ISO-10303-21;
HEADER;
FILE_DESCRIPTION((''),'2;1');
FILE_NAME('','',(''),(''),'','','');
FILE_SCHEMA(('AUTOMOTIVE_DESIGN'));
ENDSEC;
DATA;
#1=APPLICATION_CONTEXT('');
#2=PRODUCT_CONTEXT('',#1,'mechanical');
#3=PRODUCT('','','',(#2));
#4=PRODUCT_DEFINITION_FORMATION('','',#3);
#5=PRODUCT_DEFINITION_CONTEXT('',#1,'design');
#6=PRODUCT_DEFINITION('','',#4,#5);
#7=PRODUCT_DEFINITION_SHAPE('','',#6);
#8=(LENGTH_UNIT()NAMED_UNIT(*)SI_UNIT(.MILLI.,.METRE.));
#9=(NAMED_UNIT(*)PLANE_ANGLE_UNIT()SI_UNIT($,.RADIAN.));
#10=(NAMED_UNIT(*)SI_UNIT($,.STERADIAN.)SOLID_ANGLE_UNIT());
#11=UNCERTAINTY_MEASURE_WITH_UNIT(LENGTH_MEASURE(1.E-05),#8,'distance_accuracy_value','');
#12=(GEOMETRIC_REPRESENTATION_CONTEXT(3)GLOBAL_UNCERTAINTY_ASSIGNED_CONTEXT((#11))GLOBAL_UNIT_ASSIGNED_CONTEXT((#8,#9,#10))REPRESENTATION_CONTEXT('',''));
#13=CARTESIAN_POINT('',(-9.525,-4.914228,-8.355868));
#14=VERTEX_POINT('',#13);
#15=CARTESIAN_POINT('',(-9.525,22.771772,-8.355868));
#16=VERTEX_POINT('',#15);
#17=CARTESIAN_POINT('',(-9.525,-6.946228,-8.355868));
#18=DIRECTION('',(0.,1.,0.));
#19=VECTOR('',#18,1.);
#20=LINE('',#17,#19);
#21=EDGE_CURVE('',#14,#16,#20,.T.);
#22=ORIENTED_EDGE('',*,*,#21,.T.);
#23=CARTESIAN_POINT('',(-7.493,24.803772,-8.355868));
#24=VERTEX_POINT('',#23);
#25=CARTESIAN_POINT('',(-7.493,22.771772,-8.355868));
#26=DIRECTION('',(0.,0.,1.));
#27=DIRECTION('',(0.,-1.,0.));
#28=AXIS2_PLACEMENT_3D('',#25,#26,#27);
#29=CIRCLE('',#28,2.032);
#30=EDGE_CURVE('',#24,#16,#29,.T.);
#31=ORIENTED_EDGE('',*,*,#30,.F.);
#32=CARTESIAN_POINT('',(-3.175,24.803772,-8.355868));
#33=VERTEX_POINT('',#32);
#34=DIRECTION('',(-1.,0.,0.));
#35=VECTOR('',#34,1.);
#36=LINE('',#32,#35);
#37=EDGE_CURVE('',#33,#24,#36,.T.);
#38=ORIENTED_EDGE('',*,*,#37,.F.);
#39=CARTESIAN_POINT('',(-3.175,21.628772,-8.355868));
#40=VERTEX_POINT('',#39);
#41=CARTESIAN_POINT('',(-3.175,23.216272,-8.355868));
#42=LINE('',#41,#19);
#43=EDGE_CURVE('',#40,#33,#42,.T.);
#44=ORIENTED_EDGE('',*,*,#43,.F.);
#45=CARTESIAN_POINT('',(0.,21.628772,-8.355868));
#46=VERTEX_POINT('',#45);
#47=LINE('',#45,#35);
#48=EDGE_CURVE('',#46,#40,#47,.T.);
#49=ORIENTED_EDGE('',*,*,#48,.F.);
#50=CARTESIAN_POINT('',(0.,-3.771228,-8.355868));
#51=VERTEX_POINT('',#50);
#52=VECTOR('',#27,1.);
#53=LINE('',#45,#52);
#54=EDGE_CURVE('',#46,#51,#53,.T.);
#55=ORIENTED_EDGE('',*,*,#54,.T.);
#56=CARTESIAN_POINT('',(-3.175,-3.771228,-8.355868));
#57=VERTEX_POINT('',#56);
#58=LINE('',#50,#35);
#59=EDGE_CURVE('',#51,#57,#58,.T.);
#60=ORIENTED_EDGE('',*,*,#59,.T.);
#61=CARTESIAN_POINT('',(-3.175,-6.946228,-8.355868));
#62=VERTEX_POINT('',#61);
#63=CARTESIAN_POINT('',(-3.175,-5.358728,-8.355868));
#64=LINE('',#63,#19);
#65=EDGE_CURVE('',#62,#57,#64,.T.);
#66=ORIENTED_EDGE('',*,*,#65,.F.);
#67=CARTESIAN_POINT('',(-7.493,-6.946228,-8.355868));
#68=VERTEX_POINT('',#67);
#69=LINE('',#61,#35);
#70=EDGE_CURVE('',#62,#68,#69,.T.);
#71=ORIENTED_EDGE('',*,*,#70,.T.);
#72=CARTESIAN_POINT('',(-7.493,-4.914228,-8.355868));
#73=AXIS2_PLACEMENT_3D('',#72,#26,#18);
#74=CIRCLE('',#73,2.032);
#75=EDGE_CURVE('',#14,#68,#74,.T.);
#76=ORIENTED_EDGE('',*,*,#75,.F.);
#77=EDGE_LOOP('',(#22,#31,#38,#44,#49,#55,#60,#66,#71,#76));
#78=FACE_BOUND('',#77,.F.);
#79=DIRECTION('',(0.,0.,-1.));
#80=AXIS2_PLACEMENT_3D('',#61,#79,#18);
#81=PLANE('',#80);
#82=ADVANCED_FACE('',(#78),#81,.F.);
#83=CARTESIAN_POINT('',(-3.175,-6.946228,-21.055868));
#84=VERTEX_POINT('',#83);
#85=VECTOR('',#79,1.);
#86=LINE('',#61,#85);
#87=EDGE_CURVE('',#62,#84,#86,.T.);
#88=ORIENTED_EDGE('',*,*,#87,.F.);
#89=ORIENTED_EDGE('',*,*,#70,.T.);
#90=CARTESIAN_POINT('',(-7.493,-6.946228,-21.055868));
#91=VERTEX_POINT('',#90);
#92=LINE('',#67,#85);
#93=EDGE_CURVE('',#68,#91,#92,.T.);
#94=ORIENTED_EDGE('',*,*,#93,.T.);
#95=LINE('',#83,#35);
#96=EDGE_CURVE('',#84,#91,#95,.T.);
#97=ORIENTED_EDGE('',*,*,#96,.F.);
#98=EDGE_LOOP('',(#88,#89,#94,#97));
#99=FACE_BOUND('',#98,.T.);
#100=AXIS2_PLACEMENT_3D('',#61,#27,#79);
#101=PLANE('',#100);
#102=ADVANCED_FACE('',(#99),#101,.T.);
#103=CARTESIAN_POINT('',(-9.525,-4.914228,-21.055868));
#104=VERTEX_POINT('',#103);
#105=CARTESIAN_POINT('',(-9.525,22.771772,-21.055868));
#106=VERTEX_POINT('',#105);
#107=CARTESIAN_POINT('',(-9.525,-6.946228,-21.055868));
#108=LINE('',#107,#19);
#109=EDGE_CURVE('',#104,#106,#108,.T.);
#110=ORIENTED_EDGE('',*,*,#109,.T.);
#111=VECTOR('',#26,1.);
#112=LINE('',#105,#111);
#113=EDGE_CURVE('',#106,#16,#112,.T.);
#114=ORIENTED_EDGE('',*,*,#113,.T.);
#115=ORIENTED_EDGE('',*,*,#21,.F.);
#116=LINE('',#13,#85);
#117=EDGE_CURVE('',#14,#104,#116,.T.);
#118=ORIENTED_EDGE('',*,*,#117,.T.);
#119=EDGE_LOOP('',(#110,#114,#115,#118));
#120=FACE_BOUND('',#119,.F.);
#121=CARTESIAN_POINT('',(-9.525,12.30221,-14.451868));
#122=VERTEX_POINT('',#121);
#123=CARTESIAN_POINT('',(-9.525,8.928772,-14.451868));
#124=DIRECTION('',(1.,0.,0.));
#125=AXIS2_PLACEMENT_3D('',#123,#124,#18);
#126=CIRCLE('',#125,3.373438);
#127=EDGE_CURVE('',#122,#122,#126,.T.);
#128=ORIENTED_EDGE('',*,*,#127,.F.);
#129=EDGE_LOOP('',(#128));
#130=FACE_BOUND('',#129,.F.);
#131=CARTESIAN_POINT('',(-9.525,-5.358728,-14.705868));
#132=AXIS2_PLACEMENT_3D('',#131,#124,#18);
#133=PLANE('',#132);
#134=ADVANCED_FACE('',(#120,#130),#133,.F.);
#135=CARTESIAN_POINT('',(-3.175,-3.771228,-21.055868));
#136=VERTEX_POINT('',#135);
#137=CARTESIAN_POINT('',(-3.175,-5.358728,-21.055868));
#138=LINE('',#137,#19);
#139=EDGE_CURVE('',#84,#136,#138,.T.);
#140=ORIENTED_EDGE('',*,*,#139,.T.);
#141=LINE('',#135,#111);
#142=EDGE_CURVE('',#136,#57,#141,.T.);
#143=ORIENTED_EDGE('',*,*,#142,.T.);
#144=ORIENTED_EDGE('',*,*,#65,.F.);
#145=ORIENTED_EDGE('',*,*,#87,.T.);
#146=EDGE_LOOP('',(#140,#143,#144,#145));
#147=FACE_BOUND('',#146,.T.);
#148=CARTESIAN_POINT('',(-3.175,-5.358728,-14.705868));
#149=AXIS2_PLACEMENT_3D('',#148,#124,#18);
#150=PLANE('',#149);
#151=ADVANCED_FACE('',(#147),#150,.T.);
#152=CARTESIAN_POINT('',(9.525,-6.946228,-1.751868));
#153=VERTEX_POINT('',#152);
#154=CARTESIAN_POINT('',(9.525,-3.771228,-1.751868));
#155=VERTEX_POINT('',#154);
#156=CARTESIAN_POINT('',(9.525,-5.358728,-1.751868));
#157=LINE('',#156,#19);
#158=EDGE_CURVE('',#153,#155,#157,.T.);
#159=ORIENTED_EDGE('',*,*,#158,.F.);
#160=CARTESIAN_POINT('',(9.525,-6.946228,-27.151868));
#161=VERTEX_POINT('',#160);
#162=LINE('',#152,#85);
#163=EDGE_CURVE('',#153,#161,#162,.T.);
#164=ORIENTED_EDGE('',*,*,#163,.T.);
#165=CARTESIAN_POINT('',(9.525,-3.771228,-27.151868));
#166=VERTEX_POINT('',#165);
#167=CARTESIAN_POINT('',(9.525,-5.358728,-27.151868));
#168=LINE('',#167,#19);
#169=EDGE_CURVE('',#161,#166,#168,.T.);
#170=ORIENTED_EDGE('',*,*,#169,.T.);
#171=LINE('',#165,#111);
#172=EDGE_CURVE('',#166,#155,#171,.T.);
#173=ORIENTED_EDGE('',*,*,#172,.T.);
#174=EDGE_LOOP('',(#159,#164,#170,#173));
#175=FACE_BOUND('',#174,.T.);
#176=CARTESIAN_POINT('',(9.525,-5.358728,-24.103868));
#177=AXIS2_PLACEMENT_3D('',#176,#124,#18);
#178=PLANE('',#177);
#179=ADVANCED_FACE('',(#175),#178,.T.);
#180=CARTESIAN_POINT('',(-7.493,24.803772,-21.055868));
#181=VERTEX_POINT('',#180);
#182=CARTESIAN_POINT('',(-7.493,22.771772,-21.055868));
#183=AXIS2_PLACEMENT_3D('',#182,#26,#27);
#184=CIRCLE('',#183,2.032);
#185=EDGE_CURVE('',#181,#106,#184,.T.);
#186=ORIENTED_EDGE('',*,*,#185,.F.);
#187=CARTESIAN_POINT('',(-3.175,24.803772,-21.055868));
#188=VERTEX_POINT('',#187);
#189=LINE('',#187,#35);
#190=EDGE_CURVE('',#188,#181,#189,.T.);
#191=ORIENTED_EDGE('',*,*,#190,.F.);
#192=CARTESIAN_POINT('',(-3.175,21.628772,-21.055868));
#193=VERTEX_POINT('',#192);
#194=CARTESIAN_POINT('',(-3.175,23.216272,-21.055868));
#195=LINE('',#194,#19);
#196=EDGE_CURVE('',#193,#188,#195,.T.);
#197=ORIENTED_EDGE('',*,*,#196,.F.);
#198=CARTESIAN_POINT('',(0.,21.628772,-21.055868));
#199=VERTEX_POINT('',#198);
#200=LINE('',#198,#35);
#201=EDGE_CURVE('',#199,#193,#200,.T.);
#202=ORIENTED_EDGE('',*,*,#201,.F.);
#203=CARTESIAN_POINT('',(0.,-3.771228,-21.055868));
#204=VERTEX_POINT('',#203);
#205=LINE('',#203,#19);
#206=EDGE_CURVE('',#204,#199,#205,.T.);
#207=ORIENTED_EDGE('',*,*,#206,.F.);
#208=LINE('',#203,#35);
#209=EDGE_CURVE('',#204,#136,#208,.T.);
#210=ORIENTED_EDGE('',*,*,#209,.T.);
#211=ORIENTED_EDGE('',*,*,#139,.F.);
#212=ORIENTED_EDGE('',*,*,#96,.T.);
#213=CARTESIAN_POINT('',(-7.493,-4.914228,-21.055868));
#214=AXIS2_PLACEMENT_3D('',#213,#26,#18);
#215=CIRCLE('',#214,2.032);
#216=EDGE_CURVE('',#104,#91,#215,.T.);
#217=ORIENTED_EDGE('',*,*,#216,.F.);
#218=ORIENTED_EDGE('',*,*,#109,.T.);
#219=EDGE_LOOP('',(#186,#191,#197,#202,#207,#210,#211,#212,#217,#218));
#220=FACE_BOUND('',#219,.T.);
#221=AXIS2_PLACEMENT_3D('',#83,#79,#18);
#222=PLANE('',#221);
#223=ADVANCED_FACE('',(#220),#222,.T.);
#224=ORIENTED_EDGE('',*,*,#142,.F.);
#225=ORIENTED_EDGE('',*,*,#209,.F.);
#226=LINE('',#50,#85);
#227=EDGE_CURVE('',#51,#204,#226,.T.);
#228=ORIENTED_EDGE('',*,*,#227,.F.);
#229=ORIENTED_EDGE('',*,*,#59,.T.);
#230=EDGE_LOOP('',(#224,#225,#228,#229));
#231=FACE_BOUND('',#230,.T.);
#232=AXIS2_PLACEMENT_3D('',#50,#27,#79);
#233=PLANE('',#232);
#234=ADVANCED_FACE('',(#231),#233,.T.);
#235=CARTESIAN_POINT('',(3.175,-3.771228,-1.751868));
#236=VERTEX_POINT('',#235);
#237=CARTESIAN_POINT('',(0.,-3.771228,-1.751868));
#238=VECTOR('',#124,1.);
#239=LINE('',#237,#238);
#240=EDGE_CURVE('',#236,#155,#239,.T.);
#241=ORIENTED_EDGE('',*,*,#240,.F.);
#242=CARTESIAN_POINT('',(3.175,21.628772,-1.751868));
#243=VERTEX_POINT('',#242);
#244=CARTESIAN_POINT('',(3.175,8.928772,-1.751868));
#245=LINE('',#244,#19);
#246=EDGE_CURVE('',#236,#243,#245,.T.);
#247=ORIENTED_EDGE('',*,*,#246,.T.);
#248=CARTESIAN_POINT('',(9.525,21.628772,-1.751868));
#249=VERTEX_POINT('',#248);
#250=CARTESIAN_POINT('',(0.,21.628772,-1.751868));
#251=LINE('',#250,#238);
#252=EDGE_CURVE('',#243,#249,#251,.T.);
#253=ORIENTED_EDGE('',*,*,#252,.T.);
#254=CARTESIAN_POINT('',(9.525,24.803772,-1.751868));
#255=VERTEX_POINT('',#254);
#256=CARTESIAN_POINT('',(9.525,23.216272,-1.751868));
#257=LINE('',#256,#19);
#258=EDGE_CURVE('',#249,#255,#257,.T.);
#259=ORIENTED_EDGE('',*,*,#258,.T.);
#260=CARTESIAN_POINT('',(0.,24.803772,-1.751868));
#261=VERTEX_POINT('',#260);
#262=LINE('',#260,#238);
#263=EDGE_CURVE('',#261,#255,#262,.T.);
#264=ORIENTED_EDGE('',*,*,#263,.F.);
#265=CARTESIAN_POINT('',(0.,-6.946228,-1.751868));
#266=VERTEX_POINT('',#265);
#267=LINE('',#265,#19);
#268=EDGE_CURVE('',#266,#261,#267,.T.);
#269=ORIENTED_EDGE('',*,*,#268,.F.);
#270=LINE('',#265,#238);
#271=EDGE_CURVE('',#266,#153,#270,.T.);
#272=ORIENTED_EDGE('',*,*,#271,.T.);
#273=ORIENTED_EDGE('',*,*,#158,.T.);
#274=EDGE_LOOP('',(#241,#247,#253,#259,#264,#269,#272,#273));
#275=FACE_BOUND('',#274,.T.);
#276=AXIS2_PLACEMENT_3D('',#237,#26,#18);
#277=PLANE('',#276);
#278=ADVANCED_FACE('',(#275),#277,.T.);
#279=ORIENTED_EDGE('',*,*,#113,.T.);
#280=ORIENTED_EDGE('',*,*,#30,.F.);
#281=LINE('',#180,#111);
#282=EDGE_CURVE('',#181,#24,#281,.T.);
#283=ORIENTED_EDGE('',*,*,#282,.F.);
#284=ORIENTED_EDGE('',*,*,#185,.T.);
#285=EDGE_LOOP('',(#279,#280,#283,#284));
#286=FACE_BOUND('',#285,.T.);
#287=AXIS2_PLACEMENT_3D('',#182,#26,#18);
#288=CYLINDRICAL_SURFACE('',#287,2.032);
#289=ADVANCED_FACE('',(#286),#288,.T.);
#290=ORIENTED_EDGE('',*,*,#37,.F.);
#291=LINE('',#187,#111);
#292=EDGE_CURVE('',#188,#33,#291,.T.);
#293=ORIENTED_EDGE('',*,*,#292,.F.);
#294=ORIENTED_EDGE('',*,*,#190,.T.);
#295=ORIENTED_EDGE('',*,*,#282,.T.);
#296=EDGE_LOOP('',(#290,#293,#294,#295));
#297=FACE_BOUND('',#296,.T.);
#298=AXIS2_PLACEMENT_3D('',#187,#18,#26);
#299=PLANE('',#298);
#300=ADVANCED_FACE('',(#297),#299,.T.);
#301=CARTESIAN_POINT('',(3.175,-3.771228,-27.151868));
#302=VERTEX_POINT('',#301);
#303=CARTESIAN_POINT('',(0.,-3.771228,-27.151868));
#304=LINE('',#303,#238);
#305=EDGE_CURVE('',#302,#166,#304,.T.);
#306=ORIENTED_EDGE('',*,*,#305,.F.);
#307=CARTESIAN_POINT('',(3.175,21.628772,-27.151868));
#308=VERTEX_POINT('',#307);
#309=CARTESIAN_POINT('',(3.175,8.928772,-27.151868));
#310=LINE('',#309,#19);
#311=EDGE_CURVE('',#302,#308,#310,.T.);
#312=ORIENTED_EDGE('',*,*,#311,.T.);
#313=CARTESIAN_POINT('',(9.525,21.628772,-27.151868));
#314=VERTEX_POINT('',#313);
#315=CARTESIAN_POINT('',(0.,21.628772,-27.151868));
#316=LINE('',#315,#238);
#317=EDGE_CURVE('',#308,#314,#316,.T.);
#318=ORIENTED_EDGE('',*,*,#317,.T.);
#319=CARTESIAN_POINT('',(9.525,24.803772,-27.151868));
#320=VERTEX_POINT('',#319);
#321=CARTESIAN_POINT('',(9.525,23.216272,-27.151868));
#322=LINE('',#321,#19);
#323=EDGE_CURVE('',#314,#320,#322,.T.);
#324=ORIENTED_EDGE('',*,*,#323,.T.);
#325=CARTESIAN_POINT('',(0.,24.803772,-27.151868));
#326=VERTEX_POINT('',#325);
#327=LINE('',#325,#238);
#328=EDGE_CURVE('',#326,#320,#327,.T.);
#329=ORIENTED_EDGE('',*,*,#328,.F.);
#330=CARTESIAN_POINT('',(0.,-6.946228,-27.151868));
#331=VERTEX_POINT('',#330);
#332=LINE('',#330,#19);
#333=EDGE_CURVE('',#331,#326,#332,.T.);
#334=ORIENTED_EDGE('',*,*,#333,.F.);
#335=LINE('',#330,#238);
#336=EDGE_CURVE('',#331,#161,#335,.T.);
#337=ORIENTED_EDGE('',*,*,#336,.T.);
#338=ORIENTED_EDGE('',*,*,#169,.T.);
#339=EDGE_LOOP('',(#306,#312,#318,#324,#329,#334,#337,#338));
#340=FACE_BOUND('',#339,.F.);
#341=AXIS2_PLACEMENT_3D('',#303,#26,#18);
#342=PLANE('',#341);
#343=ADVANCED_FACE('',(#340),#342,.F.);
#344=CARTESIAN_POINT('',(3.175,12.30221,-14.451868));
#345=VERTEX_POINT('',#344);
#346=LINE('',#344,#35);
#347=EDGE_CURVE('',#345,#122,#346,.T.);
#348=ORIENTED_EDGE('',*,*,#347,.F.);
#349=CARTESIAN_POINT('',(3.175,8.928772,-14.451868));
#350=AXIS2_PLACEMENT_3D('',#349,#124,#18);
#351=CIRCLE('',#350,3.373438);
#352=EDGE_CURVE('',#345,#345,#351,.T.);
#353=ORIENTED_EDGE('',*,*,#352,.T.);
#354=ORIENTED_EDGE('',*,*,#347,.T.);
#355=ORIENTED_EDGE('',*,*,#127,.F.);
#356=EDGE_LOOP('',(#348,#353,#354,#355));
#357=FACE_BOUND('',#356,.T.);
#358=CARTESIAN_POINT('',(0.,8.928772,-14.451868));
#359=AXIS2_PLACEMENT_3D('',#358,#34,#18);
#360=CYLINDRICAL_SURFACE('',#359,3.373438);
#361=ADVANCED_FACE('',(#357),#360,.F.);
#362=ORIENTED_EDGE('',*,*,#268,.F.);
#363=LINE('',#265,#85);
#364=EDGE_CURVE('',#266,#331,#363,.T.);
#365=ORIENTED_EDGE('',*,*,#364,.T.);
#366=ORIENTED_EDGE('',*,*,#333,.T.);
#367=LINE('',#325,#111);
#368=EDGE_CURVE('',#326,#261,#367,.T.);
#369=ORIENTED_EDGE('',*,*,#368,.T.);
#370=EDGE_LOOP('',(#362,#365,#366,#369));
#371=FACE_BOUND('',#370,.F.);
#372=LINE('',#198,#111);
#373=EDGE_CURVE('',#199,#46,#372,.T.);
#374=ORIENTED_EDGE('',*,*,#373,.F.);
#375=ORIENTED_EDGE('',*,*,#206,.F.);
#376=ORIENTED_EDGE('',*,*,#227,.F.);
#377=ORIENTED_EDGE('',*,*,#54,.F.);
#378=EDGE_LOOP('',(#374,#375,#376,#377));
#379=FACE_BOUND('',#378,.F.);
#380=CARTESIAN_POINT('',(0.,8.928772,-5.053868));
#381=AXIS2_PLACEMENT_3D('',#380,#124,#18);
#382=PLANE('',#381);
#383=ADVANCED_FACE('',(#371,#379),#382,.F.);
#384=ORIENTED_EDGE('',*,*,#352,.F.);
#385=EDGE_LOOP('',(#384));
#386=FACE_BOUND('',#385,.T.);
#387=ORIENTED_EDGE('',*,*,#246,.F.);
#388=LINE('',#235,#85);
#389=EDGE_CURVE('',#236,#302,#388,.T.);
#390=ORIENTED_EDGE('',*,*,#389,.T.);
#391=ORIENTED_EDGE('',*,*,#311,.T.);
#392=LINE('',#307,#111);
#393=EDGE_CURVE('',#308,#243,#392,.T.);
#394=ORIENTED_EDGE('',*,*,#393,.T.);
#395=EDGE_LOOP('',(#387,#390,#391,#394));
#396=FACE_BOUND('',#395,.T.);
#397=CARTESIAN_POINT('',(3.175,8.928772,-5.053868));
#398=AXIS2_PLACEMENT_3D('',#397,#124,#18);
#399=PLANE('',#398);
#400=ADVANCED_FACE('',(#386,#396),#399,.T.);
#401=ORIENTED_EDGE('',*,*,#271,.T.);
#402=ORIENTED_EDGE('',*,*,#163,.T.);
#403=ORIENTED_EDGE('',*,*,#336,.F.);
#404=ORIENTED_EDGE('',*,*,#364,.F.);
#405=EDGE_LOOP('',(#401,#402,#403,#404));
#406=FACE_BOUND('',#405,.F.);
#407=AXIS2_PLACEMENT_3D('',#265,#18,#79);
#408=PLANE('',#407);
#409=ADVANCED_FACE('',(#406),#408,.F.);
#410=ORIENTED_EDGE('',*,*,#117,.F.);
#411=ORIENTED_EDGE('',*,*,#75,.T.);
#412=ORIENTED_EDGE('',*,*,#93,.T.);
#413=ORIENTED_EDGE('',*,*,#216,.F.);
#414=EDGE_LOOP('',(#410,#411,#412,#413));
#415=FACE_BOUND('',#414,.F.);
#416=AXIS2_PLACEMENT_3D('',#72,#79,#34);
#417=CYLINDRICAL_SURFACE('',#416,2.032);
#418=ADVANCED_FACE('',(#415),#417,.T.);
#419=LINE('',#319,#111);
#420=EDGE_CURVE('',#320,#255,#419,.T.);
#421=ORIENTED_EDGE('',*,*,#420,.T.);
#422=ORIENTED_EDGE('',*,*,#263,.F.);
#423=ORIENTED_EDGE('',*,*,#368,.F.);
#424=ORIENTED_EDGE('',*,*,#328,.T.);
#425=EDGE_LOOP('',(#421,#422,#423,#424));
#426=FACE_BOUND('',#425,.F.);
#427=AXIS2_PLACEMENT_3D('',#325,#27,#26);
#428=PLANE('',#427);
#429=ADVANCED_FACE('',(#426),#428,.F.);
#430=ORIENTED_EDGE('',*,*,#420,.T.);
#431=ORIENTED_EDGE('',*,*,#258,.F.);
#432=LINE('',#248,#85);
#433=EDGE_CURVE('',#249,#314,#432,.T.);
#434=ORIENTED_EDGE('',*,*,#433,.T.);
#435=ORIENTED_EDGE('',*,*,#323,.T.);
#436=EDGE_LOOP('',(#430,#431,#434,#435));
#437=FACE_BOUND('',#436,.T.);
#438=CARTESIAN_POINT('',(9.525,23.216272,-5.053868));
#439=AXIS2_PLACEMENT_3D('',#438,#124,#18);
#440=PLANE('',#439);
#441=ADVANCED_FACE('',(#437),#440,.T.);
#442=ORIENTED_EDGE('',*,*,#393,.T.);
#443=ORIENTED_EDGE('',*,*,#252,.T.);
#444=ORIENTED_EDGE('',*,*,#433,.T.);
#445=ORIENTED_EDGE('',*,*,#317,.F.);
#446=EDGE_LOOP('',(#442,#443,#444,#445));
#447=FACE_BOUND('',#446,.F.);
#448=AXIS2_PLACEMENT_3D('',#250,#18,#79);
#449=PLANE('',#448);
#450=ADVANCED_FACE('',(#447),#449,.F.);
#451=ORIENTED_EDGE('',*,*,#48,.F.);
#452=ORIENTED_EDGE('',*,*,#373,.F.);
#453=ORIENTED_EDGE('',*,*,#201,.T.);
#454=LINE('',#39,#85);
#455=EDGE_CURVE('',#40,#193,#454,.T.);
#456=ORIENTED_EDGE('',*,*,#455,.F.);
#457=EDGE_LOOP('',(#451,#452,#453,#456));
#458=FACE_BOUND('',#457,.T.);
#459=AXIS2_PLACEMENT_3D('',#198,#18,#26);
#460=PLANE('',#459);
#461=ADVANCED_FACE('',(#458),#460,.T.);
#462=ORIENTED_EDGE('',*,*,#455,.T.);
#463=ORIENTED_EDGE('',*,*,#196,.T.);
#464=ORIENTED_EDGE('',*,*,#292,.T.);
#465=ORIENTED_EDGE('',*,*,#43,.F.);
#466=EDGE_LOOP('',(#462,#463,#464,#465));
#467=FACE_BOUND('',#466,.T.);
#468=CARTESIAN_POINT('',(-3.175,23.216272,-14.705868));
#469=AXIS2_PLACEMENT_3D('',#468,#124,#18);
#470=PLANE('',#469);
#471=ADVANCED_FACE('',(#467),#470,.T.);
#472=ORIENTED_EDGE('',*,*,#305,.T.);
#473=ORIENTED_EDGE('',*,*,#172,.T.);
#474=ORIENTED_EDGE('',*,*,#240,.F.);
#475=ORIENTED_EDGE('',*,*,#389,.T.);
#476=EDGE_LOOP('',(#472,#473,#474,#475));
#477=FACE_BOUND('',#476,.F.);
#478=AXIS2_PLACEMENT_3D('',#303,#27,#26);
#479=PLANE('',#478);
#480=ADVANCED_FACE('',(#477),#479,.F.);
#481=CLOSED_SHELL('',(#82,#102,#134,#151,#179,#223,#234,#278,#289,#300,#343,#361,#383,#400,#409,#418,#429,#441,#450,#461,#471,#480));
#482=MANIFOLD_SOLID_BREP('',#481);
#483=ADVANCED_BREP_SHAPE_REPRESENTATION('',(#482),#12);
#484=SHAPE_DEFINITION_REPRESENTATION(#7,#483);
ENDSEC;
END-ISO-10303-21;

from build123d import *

# Parameters (mm, degrees)
F0_W     = 3.175
F0_H     = 6.6040001805
F0_H_2   = 3.81
F0_H_3   = 6.0959998195
F0_H_4   = 5.08
F1_DEPTH = 9.525
F0_R     = 3.3734375
F2_DEPTH = 9.525
F0_W_2   = 25.4
F3_DEPTH = 3.175
F4_START = -3.175
F4_DEPTH = 6.35
F5_R     = 2.032


# Not quite as in the source:
# - a feature names something its author has since deleted; it is built from what else it names


with BuildPart() as f1:
    # F0 (on Right) → F1 (new body)
    with BuildSketch(Plane.YZ):
        with Locations((23.2162721504, -5.0538677492)):
            Rectangle(F0_W, F0_H)
        with Locations((23.2162721504, -10.2608678395)):
            Rectangle(F0_W, F0_H_2)
        with Locations((23.2162721504, -19.1508678395)):
            Rectangle(F0_W, F0_H_2)
        with Locations((23.2162721504, -24.1038677492)):
            Rectangle(F0_W, F0_H_3)
        with Locations((23.2162721504, -14.7058678395)):
            Rectangle(F0_W, F0_H_4)
    extrude(amount=F1_DEPTH)



with BuildPart() as f1b:
    # F0 (on Right) → F1, piece 2 (new body)
    with BuildSketch(Plane.YZ):
        with Locations((-5.3587278496, -24.1038677492)):
            Rectangle(F0_W, F0_H_3)
        with Locations((-5.3587278496, -14.7058678395)):
            Rectangle(F0_W, F0_H_4)
        with Locations((-5.3587278496, -10.2608678395)):
            Rectangle(F0_W, F0_H_2)
        with Locations((-5.3587278496, -5.0538677492)):
            Rectangle(F0_W, F0_H)
        with Locations((-5.3587278496, -19.1508678395)):
            Rectangle(F0_W, F0_H_2)
    extrude(amount=F1_DEPTH)


with BuildPart() as f1_1:
    add(f1.part)

    add(f1b.part)  # F2 merges F1b
    # F0 (on Right) → F2 (join)
    with BuildSketch(Plane.YZ):
        Polygon((21.6287721504, -8.3558678395), (-3.7712278496, -8.3558678395), (-3.7712278496, -12.1658678395), (-3.7712278496, -17.2458678395), (-3.7712278496, -21.0558678395), (21.6287721504, -21.0558678395), (21.6287721504, -17.2458678395), (21.6287721504, -12.1658678395), align=None)
        with Locations((8.9287721504, -14.451867659)):
            Circle(F0_R, mode=Mode.SUBTRACT)
    extrude(amount=-F2_DEPTH)

    # F0 (on Right) → F3 (join)
    with BuildSketch(Plane.YZ):
        with Locations((8.9287721504, -5.0538677492)):
            Rectangle(F0_W_2, F0_H)
        Polygon((21.6287721504, -8.3558678395), (-3.7712278496, -8.3558678395), (-3.7712278496, -12.1658678395), (-3.7712278496, -17.2458678395), (-3.7712278496, -21.0558678395), (21.6287721504, -21.0558678395), (21.6287721504, -17.2458678395), (21.6287721504, -12.1658678395), align=None)
        with Locations((8.9287721504, -14.451867659)):
            Circle(F0_R, mode=Mode.SUBTRACT)
        with Locations((8.9287721504, -24.1038677492)):
            Rectangle(F0_W_2, F0_H_3)
    extrude(amount=F3_DEPTH)

    # F0 (on Right) → F4 (join)
    with BuildSketch(Plane.YZ.offset(F4_START)):
        with Locations((-5.3587278496, -14.7058678395)):
            Rectangle(F0_W, F0_H_4)
        with Locations((23.2162721504, -14.7058678395)):
            Rectangle(F0_W, F0_H_4)
        with Locations((23.2162721504, -19.1508678395)):
            Rectangle(F0_W, F0_H_2)
        with Locations((23.2162721504, -10.2608678395)):
            Rectangle(F0_W, F0_H_2)
        with Locations((-5.3587278496, -19.1508678395)):
            Rectangle(F0_W, F0_H_2)
        with Locations((-5.3587278496, -10.2608678395)):
            Rectangle(F0_W, F0_H_2)
    extrude(amount=-F4_DEPTH)

    # F5
    f5_edges = [f1_1.edges().sort_by_distance(p)[0] for p in [
        (-9.525, -6.946228, -14.705868),
        (-9.525, 24.803772, -14.705868),
    ]]
    fillet(f5_edges, radius=F5_R)


solid = f1_1.part
